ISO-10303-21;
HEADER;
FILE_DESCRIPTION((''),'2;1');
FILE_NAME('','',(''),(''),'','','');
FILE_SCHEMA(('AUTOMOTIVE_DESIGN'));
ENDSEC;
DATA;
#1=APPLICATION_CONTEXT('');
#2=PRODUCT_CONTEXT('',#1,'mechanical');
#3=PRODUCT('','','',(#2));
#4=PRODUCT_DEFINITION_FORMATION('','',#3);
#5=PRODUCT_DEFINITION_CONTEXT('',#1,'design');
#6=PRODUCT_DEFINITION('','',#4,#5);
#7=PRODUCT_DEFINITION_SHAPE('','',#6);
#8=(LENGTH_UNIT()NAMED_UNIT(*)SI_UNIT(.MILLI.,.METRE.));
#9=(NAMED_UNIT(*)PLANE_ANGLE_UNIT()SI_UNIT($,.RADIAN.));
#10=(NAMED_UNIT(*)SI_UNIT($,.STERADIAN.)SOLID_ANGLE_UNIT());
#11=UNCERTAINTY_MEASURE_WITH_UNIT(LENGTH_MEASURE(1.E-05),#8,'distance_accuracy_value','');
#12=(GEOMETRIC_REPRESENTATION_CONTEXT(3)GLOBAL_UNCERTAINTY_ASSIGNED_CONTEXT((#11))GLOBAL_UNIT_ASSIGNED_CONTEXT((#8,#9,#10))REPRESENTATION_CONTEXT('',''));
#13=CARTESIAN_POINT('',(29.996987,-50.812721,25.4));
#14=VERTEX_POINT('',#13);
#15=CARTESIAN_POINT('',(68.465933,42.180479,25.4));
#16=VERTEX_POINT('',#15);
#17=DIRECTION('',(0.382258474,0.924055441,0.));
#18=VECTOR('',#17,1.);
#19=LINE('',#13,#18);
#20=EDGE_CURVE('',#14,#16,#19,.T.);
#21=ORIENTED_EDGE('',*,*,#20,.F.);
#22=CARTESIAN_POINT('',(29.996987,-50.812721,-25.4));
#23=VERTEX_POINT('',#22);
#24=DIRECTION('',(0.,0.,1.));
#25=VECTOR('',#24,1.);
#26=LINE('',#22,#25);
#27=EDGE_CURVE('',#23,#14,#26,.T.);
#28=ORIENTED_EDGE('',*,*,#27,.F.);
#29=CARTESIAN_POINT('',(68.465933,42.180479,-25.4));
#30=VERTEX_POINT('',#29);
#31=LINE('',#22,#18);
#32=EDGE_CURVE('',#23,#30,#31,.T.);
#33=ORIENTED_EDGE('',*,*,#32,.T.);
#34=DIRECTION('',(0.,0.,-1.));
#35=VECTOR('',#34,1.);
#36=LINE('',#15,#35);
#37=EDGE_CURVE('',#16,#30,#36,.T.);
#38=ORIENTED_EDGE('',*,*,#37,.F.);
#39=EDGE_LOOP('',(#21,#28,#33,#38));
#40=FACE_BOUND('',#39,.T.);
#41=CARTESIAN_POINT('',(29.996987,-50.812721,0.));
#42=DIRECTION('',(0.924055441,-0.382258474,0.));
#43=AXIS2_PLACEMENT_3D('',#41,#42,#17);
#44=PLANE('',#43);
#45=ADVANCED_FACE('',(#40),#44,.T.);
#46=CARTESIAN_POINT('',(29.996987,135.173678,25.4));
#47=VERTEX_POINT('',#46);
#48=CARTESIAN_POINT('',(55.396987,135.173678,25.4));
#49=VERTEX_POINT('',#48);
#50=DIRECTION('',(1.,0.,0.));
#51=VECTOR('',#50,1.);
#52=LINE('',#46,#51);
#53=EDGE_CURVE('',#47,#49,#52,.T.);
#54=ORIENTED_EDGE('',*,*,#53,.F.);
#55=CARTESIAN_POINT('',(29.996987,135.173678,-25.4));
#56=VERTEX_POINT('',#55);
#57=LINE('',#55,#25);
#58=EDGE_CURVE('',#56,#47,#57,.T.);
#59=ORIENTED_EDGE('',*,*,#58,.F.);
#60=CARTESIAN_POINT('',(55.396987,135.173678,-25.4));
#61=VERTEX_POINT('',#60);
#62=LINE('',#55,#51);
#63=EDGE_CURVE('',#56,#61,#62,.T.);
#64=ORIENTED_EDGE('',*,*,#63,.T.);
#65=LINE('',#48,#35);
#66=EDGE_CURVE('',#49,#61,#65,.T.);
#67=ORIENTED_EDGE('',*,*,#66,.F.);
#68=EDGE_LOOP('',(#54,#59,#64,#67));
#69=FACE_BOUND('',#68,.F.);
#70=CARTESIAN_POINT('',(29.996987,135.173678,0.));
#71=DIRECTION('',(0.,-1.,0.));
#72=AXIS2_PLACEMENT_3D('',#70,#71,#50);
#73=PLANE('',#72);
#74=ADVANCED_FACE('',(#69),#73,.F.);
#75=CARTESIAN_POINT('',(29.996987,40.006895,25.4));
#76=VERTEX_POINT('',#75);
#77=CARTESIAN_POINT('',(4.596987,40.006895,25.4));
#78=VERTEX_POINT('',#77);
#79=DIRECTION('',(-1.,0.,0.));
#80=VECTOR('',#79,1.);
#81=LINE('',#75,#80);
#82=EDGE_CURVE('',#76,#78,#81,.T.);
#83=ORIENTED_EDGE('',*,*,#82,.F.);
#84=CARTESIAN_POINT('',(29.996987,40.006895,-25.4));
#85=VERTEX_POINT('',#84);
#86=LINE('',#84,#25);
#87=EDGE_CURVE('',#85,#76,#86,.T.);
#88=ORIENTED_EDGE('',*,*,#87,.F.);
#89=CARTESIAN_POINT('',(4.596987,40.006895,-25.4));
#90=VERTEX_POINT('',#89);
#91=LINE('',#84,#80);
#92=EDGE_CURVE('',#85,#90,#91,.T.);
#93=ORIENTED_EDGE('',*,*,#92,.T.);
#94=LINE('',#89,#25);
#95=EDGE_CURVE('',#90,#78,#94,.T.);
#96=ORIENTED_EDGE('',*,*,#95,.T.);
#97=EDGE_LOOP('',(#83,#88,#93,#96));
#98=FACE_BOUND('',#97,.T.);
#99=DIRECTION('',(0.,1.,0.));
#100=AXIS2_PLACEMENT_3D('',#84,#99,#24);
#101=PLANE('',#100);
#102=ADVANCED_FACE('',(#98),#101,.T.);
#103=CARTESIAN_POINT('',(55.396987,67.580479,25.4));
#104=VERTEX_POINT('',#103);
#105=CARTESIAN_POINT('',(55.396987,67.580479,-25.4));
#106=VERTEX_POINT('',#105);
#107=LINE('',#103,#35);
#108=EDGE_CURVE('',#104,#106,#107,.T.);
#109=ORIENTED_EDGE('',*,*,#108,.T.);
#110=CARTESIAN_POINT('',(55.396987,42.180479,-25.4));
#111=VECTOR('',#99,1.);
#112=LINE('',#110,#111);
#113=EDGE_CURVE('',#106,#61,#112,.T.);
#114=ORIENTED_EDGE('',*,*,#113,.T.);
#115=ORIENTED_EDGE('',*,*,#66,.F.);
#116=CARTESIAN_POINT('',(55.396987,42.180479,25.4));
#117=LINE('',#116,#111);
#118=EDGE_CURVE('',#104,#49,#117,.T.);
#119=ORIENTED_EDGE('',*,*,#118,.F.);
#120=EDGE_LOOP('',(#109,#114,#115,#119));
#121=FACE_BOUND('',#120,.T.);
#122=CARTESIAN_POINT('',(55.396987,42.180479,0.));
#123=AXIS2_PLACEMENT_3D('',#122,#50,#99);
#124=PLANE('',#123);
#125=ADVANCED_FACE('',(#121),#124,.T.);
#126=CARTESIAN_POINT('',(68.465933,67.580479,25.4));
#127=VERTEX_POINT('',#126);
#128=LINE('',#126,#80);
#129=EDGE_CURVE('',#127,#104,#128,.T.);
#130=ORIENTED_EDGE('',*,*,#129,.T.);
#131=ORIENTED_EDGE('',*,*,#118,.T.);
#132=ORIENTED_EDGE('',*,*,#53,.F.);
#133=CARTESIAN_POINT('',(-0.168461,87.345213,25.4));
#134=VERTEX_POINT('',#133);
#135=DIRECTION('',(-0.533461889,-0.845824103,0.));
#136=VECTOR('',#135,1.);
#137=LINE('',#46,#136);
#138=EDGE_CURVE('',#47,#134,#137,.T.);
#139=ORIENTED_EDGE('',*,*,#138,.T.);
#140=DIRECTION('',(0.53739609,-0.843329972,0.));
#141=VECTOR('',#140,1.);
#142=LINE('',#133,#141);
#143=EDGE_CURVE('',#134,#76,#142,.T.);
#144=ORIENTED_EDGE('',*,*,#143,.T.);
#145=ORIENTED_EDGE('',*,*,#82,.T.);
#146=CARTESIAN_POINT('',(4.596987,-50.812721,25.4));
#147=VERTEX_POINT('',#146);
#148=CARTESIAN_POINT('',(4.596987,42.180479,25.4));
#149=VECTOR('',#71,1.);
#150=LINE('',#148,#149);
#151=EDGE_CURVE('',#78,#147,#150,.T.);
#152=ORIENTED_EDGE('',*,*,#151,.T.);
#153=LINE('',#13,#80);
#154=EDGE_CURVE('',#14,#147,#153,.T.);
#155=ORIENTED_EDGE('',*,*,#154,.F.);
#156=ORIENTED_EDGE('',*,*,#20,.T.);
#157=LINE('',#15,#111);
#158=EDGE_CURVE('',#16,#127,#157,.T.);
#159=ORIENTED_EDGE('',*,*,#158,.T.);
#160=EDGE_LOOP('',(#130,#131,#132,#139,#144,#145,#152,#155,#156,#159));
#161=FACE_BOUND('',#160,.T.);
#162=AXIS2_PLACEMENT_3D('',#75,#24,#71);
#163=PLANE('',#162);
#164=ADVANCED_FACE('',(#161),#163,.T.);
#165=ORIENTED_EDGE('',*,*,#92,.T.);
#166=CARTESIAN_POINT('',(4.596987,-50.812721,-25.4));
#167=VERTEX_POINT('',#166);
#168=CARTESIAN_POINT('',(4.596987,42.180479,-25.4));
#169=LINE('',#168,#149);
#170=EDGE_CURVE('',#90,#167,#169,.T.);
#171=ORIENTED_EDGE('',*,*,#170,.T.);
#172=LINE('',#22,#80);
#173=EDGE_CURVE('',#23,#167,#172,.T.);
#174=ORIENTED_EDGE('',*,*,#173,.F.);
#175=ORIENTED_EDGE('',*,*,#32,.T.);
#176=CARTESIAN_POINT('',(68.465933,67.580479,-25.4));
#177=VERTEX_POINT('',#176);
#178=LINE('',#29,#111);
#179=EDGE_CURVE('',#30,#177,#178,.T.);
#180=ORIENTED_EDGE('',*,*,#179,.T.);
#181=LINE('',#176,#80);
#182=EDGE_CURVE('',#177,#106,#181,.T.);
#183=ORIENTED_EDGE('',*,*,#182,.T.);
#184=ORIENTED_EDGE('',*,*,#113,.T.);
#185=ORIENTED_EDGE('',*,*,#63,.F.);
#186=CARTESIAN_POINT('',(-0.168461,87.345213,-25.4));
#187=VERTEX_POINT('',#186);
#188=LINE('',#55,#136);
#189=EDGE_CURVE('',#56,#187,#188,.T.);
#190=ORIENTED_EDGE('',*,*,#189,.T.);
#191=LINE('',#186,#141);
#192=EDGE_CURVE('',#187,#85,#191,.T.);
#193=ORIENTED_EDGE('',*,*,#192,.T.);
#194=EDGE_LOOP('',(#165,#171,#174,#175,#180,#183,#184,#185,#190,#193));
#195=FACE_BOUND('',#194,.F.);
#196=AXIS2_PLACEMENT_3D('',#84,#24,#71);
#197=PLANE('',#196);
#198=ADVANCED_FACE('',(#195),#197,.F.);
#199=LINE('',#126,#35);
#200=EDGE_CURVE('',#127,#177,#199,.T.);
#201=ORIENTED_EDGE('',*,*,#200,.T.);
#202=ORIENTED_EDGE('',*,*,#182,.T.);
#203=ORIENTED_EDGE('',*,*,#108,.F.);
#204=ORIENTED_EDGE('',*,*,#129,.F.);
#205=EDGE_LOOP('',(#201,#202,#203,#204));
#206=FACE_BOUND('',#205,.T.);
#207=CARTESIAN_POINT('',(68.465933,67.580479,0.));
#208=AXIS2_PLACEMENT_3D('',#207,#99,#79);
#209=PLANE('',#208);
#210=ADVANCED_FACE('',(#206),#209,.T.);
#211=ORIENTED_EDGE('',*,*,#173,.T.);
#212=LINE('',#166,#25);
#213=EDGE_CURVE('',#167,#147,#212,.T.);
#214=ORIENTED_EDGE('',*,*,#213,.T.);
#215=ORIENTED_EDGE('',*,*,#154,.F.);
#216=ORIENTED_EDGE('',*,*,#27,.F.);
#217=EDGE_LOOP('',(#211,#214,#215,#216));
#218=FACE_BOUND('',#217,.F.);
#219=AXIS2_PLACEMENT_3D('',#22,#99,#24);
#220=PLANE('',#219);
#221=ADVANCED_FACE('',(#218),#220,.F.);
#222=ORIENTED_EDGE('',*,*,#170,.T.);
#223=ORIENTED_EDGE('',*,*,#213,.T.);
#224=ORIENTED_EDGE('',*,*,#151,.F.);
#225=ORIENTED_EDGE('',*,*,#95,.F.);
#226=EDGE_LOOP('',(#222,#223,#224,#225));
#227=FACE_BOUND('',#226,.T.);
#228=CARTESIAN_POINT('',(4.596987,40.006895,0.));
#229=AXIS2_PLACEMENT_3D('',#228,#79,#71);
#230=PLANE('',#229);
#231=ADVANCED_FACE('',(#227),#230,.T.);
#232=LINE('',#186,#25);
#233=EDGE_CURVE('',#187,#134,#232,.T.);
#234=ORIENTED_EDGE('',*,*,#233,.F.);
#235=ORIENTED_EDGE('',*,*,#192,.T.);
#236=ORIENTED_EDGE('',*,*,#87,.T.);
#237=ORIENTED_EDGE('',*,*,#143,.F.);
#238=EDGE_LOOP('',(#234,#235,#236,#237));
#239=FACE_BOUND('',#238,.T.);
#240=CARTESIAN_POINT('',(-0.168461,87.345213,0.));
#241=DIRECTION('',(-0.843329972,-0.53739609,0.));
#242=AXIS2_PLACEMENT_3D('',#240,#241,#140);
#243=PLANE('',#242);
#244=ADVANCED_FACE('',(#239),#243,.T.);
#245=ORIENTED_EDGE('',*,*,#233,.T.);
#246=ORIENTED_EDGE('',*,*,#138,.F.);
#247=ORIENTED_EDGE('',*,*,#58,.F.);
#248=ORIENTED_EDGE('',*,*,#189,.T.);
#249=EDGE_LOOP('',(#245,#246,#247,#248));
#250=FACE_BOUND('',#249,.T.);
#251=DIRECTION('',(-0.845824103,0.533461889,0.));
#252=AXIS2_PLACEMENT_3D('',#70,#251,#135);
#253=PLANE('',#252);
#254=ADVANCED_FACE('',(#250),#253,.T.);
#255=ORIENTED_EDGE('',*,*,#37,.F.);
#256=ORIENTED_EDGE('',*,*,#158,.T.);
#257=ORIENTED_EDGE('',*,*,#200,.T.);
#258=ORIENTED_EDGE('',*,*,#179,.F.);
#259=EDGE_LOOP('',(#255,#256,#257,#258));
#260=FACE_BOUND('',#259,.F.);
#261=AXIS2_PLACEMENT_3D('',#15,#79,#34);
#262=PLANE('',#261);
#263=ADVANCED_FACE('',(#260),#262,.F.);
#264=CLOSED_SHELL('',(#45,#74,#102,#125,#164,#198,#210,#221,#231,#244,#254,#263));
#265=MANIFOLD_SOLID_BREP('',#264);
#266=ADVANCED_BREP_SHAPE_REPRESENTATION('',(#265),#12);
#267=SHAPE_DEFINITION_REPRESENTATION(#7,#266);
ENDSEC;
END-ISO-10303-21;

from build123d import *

# Parameters (mm, degrees)
F1_DEPTH = 25.4
F2_DEPTH = 25.4
F3_DEPTH = 25.4
F4_DEPTH = 25.4
F5_DEPTH = 25.4


with BuildPart() as f1:
    # F0 (on Top) → F1 (new body)
    with BuildSketch(Plane.XY):
        Polygon((29.9969874322, 40.0068945546), (29.9969874322, 6.1151932525), (51.8570691347, 5.7021006942), align=None)
        Polygon((51.8570691347, 5.7021006942), (29.9969874322, 6.1151932525), (29.9969874322, -50.8127212524), (68.4659332037, 42.1804785728), (29.9969874322, 42.1804785728), (29.9969874322, 40.0068945546), align=None)
        Polygon((-0.1684613526, 87.345212698), (29.9969874322, 40.0068945546), (29.9969874322, 42.1804785728), (29.9969874322, 135.1736783981), align=None)
    extrude(amount=F1_DEPTH)

    # F2 (add): a face of the model
    f2_faces = [f1.faces().sort_by_distance(p)[0] for p in [
        (29.9969874322, 88.6770784855, 12.7),
    ]]
    extrude(f2_faces, amount=F2_DEPTH)

    # F3 (add): a face of the model
    f3_faces = [f1.faces().sort_by_distance(p)[0] for p in [
        (36.8893007779, 63.5629589231, 0),
    ]]
    extrude(f3_faces, amount=F3_DEPTH)

    # F4 (add): a face of the model
    f4_faces = [f1.faces().sort_by_distance(p)[0] for p in [
        (61.931460318, 42.1804785728, 0),
    ]]
    extrude(f4_faces, amount=F4_DEPTH)

    # F5 (add): a face of the model
    f5_faces = [f1.faces().sort_by_distance(p)[0] for p in [
        (29.9969874322, -5.4029133489, 0),
    ]]
    extrude(f5_faces, amount=F5_DEPTH)


solid = f1.part
